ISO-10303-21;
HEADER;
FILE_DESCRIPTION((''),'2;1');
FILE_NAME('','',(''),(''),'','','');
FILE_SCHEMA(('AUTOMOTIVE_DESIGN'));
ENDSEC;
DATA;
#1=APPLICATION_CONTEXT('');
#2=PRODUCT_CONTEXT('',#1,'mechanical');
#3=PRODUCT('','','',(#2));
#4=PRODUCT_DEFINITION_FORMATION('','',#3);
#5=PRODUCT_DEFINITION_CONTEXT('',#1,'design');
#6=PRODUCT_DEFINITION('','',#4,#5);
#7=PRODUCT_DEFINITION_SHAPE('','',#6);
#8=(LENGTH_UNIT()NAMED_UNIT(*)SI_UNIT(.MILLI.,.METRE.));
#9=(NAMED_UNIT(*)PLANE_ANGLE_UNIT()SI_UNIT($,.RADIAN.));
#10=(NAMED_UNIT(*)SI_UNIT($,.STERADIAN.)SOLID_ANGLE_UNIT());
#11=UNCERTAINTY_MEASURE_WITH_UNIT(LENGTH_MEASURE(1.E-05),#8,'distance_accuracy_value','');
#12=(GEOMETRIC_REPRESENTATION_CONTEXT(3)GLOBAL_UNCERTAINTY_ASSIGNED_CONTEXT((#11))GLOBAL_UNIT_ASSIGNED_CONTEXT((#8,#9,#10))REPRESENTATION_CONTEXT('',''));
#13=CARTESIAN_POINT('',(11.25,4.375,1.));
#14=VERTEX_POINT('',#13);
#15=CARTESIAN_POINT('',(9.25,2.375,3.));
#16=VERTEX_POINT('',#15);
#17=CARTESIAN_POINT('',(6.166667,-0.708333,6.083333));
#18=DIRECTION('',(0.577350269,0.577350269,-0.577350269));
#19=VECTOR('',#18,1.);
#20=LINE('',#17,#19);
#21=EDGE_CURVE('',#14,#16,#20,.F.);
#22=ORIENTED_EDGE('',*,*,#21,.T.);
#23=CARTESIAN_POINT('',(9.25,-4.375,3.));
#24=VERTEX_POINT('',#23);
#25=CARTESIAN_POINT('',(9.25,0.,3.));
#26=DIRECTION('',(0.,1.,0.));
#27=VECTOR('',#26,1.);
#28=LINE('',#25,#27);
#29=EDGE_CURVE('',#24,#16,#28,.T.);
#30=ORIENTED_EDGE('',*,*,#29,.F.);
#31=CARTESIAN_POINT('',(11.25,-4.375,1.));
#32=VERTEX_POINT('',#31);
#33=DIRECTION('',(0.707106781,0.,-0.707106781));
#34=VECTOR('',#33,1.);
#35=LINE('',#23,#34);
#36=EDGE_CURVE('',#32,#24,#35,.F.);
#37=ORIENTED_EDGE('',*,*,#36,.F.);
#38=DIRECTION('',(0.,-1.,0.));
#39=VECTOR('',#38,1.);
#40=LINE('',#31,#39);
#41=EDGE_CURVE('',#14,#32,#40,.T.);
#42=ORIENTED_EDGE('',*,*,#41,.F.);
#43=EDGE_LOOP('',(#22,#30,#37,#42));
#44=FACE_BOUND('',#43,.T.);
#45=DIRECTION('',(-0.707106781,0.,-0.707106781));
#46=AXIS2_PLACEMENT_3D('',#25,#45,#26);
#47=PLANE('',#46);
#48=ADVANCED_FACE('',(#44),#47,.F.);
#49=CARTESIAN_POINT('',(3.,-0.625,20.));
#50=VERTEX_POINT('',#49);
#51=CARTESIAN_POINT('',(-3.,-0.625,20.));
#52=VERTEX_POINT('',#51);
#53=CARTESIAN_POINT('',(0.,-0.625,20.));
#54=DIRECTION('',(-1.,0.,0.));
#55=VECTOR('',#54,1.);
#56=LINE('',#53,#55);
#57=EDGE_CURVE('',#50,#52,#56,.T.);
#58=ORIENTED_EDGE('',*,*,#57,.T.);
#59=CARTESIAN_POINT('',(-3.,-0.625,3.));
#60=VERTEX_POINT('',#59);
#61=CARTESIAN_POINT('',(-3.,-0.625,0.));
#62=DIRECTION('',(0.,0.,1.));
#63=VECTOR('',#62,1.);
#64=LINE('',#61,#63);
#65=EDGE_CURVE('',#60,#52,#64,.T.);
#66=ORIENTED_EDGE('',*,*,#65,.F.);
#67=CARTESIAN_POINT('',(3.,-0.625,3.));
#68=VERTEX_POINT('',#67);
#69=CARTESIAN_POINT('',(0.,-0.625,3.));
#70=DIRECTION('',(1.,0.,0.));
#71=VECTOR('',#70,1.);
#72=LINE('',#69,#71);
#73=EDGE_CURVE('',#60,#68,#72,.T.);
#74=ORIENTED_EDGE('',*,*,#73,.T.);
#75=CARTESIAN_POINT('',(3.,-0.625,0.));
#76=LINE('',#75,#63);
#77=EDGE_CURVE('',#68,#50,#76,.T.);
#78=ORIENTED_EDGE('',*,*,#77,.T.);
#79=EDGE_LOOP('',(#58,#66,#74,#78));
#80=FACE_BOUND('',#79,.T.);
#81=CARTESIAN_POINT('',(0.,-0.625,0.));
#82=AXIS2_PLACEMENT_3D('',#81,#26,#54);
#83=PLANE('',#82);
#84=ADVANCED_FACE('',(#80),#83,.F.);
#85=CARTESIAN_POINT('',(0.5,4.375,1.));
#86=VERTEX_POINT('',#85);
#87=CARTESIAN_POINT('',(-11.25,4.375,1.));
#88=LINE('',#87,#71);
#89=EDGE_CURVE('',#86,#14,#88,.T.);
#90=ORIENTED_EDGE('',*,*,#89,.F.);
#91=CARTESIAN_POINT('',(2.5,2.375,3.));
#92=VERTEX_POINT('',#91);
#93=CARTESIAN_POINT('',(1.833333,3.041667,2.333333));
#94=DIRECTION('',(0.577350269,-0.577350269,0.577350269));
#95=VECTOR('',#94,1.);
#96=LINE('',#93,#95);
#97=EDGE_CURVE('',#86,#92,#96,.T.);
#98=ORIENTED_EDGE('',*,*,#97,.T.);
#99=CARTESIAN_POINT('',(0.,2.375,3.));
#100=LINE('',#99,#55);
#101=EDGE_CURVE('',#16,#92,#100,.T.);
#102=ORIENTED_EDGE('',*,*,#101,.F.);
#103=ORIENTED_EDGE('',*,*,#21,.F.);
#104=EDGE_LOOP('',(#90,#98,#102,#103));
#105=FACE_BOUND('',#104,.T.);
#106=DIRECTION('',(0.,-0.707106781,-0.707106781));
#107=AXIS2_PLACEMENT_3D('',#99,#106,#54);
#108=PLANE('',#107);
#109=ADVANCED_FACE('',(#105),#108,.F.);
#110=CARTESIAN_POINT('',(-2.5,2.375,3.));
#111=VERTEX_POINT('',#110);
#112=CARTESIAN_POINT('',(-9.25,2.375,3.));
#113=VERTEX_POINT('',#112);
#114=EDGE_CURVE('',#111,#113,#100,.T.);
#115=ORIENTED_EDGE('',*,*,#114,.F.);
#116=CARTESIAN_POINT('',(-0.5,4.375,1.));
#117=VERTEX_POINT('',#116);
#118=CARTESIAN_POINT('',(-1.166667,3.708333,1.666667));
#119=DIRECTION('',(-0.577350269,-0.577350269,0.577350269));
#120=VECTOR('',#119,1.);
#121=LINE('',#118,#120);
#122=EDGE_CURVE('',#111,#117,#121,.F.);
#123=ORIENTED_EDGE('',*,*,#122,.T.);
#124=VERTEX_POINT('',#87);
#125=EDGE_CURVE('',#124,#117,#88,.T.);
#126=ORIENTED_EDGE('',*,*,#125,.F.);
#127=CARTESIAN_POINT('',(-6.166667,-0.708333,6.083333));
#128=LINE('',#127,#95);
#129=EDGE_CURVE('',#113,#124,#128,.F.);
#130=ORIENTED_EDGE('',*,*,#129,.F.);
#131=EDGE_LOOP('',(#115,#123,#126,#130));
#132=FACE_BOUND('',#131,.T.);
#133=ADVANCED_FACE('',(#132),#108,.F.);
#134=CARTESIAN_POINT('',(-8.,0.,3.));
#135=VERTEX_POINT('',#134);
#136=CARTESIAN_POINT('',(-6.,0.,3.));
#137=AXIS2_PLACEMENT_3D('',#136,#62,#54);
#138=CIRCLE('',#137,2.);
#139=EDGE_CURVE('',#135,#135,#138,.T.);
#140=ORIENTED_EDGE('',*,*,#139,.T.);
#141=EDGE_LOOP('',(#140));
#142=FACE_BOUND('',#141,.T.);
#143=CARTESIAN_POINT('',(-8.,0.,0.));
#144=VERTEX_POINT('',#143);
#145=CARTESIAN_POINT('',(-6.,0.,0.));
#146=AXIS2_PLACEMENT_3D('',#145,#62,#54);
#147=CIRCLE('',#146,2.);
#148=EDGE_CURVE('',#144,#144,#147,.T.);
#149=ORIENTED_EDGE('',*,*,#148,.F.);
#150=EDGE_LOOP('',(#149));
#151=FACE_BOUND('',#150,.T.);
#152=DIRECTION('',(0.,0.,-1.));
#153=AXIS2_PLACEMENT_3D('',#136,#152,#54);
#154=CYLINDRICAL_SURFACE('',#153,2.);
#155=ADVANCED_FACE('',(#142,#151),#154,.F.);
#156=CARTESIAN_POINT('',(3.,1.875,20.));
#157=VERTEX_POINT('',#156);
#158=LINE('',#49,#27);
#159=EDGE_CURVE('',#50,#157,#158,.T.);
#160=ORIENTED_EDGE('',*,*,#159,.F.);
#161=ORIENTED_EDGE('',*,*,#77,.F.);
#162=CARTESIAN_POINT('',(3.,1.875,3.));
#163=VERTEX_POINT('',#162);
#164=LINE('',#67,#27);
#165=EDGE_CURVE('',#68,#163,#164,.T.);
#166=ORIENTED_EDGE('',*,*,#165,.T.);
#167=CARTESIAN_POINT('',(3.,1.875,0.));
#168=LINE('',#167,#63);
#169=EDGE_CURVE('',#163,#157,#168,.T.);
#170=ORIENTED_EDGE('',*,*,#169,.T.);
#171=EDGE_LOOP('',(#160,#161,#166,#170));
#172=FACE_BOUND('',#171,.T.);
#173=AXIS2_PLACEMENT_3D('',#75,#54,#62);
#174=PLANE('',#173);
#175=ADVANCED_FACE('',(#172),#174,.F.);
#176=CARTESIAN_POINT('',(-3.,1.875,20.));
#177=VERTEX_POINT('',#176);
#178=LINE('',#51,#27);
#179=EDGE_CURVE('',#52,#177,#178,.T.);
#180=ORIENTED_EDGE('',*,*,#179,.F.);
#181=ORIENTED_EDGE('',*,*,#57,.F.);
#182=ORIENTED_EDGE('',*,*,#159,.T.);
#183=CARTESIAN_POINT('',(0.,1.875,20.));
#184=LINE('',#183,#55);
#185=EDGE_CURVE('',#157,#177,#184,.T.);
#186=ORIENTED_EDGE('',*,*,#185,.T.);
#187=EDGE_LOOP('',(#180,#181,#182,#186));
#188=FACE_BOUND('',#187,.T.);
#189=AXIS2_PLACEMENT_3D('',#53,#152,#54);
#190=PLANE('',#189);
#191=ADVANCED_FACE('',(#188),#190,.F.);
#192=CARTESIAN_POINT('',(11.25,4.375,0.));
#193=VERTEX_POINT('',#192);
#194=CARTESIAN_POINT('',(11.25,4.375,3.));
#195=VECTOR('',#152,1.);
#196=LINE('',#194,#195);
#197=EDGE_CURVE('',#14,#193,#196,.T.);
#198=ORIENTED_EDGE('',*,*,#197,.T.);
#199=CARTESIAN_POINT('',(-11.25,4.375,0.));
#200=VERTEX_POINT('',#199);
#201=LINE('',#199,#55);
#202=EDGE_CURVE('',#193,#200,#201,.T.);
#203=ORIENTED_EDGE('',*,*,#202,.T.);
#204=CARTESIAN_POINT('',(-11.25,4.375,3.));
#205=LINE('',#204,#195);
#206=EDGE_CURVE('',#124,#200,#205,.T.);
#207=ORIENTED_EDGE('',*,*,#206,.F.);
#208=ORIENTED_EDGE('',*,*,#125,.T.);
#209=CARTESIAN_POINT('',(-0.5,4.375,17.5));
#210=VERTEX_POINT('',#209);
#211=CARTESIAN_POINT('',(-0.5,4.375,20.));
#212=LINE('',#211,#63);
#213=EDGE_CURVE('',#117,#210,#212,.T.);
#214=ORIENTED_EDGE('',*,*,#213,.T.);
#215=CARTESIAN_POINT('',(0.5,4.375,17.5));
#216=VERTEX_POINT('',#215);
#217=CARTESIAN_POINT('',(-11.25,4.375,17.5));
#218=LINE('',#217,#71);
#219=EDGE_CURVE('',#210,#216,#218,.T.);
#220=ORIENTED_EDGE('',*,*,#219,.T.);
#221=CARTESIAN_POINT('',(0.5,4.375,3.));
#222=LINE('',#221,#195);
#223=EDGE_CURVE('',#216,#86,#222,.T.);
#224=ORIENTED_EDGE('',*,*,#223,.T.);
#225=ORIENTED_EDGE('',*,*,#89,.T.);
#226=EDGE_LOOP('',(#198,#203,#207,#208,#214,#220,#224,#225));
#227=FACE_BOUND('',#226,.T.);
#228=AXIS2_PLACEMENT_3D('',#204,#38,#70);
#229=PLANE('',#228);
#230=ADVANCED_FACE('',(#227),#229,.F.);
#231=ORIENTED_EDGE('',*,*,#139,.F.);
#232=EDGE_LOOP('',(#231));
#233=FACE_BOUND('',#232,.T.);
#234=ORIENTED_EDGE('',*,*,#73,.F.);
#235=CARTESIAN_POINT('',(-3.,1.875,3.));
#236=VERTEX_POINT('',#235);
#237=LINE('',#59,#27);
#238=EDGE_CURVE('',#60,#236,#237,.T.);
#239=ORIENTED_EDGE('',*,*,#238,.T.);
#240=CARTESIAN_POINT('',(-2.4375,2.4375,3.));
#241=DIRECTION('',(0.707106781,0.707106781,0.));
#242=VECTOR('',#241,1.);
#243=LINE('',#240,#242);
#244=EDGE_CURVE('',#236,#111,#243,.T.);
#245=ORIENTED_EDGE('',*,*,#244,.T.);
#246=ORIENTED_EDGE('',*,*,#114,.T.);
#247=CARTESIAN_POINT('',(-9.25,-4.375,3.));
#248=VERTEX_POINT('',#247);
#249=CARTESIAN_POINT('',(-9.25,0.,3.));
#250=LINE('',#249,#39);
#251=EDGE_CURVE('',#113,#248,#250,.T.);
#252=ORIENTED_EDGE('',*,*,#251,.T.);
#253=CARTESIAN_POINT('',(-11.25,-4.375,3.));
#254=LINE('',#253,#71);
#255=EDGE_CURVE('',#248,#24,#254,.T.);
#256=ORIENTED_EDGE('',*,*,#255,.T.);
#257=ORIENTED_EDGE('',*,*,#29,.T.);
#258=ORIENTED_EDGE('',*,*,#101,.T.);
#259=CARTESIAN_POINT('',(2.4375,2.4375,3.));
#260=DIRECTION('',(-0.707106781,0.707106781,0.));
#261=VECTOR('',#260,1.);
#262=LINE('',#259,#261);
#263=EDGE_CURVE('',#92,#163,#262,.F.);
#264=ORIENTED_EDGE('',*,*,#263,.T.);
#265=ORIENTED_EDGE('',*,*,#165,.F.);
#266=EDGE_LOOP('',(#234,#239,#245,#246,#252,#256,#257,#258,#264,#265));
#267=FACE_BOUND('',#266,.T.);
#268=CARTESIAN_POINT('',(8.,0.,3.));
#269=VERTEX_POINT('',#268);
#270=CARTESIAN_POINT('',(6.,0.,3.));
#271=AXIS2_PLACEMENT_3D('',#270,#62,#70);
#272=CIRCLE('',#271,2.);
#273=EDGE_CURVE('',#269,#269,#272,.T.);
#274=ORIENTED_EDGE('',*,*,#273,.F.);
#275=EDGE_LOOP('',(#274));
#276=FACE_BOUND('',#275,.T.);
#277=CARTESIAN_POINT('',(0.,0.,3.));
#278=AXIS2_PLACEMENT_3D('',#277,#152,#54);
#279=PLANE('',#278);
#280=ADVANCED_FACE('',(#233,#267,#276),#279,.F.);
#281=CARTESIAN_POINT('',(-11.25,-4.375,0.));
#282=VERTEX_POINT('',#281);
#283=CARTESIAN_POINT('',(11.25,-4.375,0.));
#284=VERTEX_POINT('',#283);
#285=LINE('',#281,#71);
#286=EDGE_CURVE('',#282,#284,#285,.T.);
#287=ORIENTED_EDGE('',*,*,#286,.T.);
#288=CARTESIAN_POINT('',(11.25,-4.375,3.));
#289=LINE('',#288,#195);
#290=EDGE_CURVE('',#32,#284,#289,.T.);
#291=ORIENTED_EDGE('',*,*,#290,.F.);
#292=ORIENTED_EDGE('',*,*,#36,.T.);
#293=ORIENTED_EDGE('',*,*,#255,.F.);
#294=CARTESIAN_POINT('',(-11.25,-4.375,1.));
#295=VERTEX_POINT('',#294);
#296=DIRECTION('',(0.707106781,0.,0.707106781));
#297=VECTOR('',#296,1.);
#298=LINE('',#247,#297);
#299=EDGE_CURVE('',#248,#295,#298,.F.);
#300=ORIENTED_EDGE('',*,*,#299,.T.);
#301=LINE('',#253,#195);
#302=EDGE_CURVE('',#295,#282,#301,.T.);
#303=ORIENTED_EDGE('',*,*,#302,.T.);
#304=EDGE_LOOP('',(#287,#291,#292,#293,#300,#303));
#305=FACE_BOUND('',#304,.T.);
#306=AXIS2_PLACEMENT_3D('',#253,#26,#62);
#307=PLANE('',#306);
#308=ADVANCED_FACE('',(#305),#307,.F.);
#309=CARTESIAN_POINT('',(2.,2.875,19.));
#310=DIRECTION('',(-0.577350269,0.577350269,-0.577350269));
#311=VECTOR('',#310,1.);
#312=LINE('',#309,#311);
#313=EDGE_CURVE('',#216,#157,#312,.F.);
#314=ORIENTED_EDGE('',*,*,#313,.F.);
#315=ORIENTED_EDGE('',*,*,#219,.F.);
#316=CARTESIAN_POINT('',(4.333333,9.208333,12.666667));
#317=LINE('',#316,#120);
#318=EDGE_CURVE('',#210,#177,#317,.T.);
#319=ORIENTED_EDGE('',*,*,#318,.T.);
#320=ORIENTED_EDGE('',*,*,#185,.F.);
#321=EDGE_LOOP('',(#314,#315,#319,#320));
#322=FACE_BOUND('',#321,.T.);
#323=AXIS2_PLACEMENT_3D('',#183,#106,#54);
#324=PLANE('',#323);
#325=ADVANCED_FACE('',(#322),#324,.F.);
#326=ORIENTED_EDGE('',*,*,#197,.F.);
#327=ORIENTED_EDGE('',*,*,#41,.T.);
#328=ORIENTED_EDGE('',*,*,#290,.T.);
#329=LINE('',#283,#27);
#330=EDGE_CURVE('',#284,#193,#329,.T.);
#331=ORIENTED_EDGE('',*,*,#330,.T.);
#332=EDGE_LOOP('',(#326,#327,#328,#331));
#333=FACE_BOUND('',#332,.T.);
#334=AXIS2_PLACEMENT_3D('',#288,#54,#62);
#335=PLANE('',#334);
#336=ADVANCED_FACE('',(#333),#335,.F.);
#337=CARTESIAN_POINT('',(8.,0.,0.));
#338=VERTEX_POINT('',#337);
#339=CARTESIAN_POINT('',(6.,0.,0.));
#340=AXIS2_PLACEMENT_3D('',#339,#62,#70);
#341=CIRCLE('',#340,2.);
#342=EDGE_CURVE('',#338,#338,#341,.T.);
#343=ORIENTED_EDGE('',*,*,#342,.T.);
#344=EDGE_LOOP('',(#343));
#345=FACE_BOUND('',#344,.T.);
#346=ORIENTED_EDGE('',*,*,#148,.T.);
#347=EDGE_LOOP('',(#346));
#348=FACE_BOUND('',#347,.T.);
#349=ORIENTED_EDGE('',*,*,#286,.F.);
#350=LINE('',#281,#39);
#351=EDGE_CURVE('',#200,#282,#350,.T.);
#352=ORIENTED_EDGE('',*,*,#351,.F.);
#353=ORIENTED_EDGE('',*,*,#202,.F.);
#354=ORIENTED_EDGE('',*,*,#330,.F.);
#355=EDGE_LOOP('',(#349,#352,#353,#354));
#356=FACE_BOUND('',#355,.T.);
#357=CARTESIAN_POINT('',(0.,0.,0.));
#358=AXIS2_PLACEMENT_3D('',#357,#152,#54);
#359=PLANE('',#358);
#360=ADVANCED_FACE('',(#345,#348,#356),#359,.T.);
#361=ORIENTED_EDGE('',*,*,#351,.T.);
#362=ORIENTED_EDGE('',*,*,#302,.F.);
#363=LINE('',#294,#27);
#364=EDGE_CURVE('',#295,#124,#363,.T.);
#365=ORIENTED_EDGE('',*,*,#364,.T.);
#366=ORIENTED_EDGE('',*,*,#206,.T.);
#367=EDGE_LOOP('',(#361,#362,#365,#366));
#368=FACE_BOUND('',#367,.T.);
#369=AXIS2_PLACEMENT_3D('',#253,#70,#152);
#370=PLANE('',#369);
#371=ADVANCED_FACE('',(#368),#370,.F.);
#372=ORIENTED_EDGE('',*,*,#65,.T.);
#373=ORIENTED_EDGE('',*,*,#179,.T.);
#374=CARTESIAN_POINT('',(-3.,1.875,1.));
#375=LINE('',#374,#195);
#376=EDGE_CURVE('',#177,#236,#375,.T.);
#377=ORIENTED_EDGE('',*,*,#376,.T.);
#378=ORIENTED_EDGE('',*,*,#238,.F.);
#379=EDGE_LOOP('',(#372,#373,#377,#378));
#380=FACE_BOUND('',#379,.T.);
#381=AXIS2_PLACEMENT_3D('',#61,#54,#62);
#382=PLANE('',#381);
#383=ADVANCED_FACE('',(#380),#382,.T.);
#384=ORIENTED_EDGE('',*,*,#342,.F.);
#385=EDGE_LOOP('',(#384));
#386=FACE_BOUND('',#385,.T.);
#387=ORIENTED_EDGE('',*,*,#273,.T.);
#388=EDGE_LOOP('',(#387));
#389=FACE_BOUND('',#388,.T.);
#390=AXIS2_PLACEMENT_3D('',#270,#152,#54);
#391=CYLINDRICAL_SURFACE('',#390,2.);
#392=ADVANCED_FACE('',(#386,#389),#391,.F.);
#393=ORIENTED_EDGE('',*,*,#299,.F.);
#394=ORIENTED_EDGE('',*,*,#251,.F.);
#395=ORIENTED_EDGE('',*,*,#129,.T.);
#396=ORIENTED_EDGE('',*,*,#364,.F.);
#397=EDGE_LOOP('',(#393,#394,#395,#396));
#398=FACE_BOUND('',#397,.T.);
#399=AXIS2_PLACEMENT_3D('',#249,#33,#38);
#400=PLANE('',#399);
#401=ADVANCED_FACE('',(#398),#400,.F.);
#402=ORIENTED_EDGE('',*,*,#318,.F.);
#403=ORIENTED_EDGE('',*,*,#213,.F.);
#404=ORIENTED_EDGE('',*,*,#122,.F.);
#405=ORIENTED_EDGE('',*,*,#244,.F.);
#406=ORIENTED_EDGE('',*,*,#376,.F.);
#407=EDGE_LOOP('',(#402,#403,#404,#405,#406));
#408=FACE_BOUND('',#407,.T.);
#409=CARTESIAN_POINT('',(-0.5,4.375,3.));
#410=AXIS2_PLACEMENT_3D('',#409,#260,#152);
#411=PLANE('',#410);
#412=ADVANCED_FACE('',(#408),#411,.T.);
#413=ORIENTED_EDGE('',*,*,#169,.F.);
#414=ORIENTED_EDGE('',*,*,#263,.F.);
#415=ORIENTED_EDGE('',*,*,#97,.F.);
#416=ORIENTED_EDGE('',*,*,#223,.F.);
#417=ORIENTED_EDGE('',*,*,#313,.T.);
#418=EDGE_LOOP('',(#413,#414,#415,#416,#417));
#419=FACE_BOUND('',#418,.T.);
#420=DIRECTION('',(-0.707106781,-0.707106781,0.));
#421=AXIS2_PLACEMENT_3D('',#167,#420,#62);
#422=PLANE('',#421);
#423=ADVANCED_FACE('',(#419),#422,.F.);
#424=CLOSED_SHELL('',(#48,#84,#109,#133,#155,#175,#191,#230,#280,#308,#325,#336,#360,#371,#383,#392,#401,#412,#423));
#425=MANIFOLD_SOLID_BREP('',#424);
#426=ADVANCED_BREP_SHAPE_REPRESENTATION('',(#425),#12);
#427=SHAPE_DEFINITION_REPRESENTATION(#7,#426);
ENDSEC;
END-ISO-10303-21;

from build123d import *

# Parameters (mm, degrees)
SKETCH1_W           = 22.5
SKETCH1_H           = 8.75
SKETCH1_R           = 2
BOSS_EXTRUDE1_DEPTH = 3
SKETCH2_W           = 3
SKETCH2_H           = 17
BOSS_EXTRUDE2_DEPTH = 5
CHAMFER1_SIZE       = 2
CHAMFER2_SIZE       = 2.5


with BuildPart() as part:
    # Sketch1 → Boss-Extrude1 (new body)
    with BuildSketch(Plane.XY):
        Rectangle(SKETCH1_W, SKETCH1_H)
        with Locations((6, 0)):
            Circle(SKETCH1_R, mode=Mode.SUBTRACT)
        with Locations(Location((-6, 0, 0), (0, 0, 180))):
            Circle(SKETCH1_R, mode=Mode.SUBTRACT)
    extrude(amount=BOSS_EXTRUDE1_DEPTH)

    # Sketch2 → Boss-Extrude2 (add)
    with BuildSketch(Plane(origin=(0, 4.375, 0), x_dir=(1, 0, 0), z_dir=(0, 1, 0))):
        with Locations((-1.5, -11.5)):
            Rectangle(SKETCH2_W, SKETCH2_H)
        with Locations((1.5, -11.5)):
            Rectangle(SKETCH2_W, SKETCH2_H)
    extrude(amount=-BOSS_EXTRUDE2_DEPTH)

    # Chamfer1
    chamfer1_edges = [part.edges().sort_by_distance(p)[0] for p in [
        (-11.25, 0, 3),
        (-7.125, 4.375, 3),
        (11.25, 0, 3),
        (7.125, 4.375, 3),
    ]]
    chamfer(chamfer1_edges, length=CHAMFER1_SIZE)

    # Chamfer2
    # the kernel refuses this chamfer: 2.5 mm, written as the material it takes off along each edge
    with BuildSketch(Plane(origin=(3, 4.375, 26.42920747), x_dir=(0.027495876610586317, -0.9996219169112968, 0), z_dir=(0, 0, -1))) as chamfer2_piece_1_section:
        Polygon((CHAMFER2_SIZE * 0.999621916911, CHAMFER2_SIZE * 0.0274958766106), (-CHAMFER2_SIZE * 0.0274958766106, CHAMFER2_SIZE * 0.999621916911), (0, 0), align=None)
    chamfer2_piece_1 = extrude(amount=31.85841494, mode=Mode.PRIVATE)
    chamfer2_piece_1 = split(chamfer2_piece_1, bisect_by=Plane(origin=(2.16638878, 3.54222244, 3), z_dir=(0, 0, 1)), keep=Keep.TOP, mode=Mode.PRIVATE)
    add(chamfer2_piece_1, mode=Mode.SUBTRACT)
    with BuildSketch(Plane(origin=(3, 4.375, 26.42920747), x_dir=(0.027495876610586317, -0.9996219169112968, 0), z_dir=(0, 0, -1))) as chamfer2_piece_2_section:
        Polygon((CHAMFER2_SIZE * 0.999621916911, CHAMFER2_SIZE * 0.0274958766106), (-CHAMFER2_SIZE * 0.0274958766106, CHAMFER2_SIZE * 0.999621916911), (0, 0), align=None)
    chamfer2_piece_2 = extrude(amount=31.85841494, mode=Mode.PRIVATE)
    chamfer2_piece_2 = split(chamfer2_piece_2, bisect_by=Plane(origin=(2.022727273, 3.465909091, 1.909090909), z_dir=(0, 0.7071067811865476, 0.7071067811865476)), keep=Keep.TOP, mode=Mode.PRIVATE)
    add(chamfer2_piece_2, mode=Mode.SUBTRACT)
    with BuildSketch(Plane(origin=(9.42920747, 4.375, 20), x_dir=(0, -0.9996219169112968, 0.027495876610586317), z_dir=(-1, 0, 0))) as chamfer2_piece_3:
        Polygon((CHAMFER2_SIZE * 0.999621916911, -CHAMFER2_SIZE * 0.0274958766106), (-CHAMFER2_SIZE * 0.0274958766106, -CHAMFER2_SIZE * 0.999621916911), (0, 0), align=None)
    extrude(amount=18.85841494, mode=Mode.SUBTRACT)
    with BuildSketch(Plane(origin=(-3, 4.375, -5.42920747), x_dir=(-0.027495876610586147, -0.9996219169112968, 0), z_dir=(0, 0, 1))) as chamfer2_piece_4_section:
        Polygon((CHAMFER2_SIZE * 0.999621916911, CHAMFER2_SIZE * 0.0274958766106), (-CHAMFER2_SIZE * 0.0274958766106, CHAMFER2_SIZE * 0.999621916911), (0, 0), align=None)
    chamfer2_piece_4 = extrude(amount=31.85841494, mode=Mode.PRIVATE)
    chamfer2_piece_4 = split(chamfer2_piece_4, bisect_by=Plane(origin=(-2.022727273, 3.465909091, 1.909090909), z_dir=(0, 0.7071067811865476, 0.7071067811865476)), keep=Keep.TOP, mode=Mode.PRIVATE)
    add(chamfer2_piece_4, mode=Mode.SUBTRACT)
    with BuildSketch(Plane(origin=(-3, 4.375, -5.42920747), x_dir=(-0.027495876610586147, -0.9996219169112968, 0), z_dir=(0, 0, 1))) as chamfer2_piece_5_section:
        Polygon((CHAMFER2_SIZE * 0.999621916911, CHAMFER2_SIZE * 0.0274958766106), (-CHAMFER2_SIZE * 0.0274958766106, CHAMFER2_SIZE * 0.999621916911), (0, 0), align=None)
    chamfer2_piece_5 = extrude(amount=31.85841494, mode=Mode.PRIVATE)
    chamfer2_piece_5 = split(chamfer2_piece_5, bisect_by=Plane(origin=(-2.875, 2.125, 3), z_dir=(0, 0, 1)), keep=Keep.TOP, mode=Mode.PRIVATE)
    add(chamfer2_piece_5, mode=Mode.SUBTRACT)


solid = part.part
